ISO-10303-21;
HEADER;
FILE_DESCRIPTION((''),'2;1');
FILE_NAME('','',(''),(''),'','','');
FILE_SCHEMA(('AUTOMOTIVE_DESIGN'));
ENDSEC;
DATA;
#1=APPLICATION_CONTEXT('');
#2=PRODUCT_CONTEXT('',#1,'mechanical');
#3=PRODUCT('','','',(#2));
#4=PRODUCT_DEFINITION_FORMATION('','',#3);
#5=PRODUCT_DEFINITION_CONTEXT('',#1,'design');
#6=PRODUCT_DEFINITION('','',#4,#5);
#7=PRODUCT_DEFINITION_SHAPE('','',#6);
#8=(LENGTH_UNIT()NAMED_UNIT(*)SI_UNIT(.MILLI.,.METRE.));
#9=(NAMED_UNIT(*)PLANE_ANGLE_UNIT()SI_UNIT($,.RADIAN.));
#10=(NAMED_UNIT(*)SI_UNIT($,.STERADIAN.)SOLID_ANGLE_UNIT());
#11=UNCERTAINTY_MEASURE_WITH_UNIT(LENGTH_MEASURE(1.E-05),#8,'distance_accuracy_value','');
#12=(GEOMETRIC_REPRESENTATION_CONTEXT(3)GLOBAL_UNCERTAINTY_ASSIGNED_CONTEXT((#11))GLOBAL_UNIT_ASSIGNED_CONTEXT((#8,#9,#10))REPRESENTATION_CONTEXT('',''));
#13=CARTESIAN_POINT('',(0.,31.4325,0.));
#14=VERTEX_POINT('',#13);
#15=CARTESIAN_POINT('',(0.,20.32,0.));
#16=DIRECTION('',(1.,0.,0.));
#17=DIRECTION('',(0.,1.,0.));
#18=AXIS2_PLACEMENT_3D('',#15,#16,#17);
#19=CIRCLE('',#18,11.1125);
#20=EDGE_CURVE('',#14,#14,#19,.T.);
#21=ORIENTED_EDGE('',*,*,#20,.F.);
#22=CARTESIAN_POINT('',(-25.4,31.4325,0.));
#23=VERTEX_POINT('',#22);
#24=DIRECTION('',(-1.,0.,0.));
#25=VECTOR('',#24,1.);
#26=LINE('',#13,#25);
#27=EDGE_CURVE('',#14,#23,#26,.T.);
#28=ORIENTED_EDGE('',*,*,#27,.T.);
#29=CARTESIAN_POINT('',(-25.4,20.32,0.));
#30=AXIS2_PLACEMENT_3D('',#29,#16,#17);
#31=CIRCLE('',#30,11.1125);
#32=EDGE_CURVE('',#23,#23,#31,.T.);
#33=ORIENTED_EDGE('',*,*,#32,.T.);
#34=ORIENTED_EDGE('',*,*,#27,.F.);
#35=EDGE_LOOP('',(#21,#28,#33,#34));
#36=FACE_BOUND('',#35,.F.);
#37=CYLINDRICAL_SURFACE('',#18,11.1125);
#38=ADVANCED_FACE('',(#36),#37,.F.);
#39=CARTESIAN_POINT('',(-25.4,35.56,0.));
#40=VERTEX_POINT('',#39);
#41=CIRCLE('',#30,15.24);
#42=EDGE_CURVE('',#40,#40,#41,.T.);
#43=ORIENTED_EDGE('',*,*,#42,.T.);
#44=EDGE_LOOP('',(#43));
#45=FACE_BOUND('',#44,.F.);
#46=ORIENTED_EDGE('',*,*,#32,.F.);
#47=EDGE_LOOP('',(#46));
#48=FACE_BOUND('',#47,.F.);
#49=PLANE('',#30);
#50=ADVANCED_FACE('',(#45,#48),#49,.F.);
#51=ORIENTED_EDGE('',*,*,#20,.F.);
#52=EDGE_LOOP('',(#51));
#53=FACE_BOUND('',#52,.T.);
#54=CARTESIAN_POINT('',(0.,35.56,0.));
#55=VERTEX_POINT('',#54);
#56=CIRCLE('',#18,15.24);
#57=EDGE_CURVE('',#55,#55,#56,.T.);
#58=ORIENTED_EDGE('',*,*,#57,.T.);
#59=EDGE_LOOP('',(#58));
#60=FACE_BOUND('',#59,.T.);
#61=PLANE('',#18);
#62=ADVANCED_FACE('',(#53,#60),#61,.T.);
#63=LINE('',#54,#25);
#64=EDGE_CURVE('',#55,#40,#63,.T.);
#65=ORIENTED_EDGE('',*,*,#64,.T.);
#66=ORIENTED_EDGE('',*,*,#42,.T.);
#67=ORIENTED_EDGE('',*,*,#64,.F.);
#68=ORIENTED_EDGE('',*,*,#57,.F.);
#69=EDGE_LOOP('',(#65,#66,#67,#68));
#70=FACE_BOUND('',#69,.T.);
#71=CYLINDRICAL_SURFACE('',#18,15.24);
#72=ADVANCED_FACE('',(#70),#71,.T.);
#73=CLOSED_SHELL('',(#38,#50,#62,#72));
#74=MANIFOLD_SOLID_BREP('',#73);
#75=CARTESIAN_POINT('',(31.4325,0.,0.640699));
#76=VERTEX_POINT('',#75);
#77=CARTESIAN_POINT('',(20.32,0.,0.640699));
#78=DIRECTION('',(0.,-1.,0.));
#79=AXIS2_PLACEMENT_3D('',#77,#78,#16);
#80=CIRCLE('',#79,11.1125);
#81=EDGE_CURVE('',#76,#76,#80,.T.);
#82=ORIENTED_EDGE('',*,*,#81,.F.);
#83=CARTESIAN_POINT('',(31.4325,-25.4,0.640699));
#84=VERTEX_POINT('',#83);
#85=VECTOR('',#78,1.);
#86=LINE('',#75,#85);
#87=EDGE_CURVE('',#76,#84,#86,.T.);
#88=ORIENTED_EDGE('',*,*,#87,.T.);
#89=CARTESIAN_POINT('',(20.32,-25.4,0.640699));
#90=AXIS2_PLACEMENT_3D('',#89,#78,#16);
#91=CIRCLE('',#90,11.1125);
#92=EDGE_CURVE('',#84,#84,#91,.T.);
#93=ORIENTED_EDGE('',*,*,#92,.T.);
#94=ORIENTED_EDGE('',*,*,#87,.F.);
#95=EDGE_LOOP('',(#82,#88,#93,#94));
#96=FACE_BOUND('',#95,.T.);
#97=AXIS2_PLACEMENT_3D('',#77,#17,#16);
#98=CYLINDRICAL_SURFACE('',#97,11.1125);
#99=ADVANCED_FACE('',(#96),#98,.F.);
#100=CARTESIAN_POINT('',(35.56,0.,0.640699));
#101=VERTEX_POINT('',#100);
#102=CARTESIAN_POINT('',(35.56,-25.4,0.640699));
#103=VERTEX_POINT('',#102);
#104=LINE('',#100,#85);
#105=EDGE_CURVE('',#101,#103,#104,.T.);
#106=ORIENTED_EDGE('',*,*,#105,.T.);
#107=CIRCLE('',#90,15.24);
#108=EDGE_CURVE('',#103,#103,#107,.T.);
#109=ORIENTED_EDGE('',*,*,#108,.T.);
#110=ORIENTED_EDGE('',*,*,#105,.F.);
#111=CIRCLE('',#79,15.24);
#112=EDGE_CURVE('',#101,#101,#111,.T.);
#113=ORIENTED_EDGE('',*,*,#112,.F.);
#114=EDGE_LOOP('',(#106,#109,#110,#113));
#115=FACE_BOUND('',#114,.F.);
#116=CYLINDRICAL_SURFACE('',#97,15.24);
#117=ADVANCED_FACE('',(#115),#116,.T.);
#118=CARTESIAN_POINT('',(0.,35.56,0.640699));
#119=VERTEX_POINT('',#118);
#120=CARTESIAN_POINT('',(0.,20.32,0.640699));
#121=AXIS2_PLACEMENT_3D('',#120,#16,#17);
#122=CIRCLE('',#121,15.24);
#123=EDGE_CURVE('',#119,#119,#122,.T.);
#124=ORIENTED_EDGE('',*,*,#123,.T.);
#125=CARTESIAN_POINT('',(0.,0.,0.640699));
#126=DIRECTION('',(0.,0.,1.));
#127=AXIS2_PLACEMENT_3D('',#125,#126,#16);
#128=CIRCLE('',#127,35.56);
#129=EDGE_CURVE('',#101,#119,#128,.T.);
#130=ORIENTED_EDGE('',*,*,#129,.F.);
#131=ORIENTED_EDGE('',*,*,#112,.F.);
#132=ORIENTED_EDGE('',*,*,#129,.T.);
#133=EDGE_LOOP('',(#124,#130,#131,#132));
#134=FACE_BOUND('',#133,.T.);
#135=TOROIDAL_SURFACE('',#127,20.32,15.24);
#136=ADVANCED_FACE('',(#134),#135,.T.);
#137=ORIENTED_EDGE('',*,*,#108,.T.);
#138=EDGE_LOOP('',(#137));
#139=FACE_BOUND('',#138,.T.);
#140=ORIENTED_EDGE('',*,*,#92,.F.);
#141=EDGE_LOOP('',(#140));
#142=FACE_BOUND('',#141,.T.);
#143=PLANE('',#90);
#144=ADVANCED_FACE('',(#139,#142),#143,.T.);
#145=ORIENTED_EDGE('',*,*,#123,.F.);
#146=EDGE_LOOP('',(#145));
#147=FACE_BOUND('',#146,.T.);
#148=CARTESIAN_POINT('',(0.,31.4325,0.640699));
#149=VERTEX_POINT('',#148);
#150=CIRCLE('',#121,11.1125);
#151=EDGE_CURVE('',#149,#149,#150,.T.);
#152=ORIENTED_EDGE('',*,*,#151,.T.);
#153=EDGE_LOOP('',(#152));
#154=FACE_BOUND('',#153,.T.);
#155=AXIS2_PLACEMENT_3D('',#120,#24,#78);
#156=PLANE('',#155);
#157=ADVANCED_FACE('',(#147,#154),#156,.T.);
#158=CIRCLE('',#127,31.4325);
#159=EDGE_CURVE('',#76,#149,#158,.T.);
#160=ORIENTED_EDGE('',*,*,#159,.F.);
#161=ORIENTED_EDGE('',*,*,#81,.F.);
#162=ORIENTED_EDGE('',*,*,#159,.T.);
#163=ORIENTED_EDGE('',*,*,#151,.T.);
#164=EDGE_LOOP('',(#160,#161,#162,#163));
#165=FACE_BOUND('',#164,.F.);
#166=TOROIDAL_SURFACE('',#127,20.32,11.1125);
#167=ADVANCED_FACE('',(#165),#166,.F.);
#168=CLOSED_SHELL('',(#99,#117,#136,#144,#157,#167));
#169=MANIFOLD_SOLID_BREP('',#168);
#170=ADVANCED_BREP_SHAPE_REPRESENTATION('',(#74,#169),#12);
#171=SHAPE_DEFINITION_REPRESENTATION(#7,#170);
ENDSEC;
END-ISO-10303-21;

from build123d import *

# Parameters (mm, degrees)
F0_R        = 15.24
F0_R_2      = 11.1125
F2_DEPTH    = 25.4
F1_R        = 15.24
F1_R_2      = 11.1125
F3_DEPTH    = 25.4
F2_FACE_R   = 15.24
F2_FACE_R_2 = 11.1125


with BuildPart() as f2:
    # F0 (on Front) → F2 (new body)
    with BuildSketch(Plane.XZ):
        with Locations((20.32, 0.640698825)):
            Circle(F0_R)
        with Locations((20.32, 0.640698825)):
            Circle(F0_R_2, mode=Mode.SUBTRACT)
    extrude(amount=F2_DEPTH)

    # F5: sweep along a path in F4
    with BuildLine(Plane.XY) as f5_path:
        ThreePointArc((35.4710668325, 0), (25.0818318932, 25.0818318932), (0, 35.4710668325))
    # F2_face (on face) → F5 (sweep)
    with BuildSketch(Plane(origin=(20.32, 0, 0.640698825), x_dir=(1, 0, 0), z_dir=(0, 1, 0))):
        Circle(F2_FACE_R)
        Circle(F2_FACE_R_2, mode=Mode.SUBTRACT)
    sweep(path=f5_path.line)


with BuildPart() as f3:
    # F1 (on Right) → F3 (new body)
    with BuildSketch(Plane.YZ):
        with Locations((20.32, 0)):
            Circle(F1_R)
        with Locations((20.32, 0)):
            Circle(F1_R_2, mode=Mode.SUBTRACT)
    extrude(amount=-F3_DEPTH)


solid = Compound([f2.part, f3.part])
